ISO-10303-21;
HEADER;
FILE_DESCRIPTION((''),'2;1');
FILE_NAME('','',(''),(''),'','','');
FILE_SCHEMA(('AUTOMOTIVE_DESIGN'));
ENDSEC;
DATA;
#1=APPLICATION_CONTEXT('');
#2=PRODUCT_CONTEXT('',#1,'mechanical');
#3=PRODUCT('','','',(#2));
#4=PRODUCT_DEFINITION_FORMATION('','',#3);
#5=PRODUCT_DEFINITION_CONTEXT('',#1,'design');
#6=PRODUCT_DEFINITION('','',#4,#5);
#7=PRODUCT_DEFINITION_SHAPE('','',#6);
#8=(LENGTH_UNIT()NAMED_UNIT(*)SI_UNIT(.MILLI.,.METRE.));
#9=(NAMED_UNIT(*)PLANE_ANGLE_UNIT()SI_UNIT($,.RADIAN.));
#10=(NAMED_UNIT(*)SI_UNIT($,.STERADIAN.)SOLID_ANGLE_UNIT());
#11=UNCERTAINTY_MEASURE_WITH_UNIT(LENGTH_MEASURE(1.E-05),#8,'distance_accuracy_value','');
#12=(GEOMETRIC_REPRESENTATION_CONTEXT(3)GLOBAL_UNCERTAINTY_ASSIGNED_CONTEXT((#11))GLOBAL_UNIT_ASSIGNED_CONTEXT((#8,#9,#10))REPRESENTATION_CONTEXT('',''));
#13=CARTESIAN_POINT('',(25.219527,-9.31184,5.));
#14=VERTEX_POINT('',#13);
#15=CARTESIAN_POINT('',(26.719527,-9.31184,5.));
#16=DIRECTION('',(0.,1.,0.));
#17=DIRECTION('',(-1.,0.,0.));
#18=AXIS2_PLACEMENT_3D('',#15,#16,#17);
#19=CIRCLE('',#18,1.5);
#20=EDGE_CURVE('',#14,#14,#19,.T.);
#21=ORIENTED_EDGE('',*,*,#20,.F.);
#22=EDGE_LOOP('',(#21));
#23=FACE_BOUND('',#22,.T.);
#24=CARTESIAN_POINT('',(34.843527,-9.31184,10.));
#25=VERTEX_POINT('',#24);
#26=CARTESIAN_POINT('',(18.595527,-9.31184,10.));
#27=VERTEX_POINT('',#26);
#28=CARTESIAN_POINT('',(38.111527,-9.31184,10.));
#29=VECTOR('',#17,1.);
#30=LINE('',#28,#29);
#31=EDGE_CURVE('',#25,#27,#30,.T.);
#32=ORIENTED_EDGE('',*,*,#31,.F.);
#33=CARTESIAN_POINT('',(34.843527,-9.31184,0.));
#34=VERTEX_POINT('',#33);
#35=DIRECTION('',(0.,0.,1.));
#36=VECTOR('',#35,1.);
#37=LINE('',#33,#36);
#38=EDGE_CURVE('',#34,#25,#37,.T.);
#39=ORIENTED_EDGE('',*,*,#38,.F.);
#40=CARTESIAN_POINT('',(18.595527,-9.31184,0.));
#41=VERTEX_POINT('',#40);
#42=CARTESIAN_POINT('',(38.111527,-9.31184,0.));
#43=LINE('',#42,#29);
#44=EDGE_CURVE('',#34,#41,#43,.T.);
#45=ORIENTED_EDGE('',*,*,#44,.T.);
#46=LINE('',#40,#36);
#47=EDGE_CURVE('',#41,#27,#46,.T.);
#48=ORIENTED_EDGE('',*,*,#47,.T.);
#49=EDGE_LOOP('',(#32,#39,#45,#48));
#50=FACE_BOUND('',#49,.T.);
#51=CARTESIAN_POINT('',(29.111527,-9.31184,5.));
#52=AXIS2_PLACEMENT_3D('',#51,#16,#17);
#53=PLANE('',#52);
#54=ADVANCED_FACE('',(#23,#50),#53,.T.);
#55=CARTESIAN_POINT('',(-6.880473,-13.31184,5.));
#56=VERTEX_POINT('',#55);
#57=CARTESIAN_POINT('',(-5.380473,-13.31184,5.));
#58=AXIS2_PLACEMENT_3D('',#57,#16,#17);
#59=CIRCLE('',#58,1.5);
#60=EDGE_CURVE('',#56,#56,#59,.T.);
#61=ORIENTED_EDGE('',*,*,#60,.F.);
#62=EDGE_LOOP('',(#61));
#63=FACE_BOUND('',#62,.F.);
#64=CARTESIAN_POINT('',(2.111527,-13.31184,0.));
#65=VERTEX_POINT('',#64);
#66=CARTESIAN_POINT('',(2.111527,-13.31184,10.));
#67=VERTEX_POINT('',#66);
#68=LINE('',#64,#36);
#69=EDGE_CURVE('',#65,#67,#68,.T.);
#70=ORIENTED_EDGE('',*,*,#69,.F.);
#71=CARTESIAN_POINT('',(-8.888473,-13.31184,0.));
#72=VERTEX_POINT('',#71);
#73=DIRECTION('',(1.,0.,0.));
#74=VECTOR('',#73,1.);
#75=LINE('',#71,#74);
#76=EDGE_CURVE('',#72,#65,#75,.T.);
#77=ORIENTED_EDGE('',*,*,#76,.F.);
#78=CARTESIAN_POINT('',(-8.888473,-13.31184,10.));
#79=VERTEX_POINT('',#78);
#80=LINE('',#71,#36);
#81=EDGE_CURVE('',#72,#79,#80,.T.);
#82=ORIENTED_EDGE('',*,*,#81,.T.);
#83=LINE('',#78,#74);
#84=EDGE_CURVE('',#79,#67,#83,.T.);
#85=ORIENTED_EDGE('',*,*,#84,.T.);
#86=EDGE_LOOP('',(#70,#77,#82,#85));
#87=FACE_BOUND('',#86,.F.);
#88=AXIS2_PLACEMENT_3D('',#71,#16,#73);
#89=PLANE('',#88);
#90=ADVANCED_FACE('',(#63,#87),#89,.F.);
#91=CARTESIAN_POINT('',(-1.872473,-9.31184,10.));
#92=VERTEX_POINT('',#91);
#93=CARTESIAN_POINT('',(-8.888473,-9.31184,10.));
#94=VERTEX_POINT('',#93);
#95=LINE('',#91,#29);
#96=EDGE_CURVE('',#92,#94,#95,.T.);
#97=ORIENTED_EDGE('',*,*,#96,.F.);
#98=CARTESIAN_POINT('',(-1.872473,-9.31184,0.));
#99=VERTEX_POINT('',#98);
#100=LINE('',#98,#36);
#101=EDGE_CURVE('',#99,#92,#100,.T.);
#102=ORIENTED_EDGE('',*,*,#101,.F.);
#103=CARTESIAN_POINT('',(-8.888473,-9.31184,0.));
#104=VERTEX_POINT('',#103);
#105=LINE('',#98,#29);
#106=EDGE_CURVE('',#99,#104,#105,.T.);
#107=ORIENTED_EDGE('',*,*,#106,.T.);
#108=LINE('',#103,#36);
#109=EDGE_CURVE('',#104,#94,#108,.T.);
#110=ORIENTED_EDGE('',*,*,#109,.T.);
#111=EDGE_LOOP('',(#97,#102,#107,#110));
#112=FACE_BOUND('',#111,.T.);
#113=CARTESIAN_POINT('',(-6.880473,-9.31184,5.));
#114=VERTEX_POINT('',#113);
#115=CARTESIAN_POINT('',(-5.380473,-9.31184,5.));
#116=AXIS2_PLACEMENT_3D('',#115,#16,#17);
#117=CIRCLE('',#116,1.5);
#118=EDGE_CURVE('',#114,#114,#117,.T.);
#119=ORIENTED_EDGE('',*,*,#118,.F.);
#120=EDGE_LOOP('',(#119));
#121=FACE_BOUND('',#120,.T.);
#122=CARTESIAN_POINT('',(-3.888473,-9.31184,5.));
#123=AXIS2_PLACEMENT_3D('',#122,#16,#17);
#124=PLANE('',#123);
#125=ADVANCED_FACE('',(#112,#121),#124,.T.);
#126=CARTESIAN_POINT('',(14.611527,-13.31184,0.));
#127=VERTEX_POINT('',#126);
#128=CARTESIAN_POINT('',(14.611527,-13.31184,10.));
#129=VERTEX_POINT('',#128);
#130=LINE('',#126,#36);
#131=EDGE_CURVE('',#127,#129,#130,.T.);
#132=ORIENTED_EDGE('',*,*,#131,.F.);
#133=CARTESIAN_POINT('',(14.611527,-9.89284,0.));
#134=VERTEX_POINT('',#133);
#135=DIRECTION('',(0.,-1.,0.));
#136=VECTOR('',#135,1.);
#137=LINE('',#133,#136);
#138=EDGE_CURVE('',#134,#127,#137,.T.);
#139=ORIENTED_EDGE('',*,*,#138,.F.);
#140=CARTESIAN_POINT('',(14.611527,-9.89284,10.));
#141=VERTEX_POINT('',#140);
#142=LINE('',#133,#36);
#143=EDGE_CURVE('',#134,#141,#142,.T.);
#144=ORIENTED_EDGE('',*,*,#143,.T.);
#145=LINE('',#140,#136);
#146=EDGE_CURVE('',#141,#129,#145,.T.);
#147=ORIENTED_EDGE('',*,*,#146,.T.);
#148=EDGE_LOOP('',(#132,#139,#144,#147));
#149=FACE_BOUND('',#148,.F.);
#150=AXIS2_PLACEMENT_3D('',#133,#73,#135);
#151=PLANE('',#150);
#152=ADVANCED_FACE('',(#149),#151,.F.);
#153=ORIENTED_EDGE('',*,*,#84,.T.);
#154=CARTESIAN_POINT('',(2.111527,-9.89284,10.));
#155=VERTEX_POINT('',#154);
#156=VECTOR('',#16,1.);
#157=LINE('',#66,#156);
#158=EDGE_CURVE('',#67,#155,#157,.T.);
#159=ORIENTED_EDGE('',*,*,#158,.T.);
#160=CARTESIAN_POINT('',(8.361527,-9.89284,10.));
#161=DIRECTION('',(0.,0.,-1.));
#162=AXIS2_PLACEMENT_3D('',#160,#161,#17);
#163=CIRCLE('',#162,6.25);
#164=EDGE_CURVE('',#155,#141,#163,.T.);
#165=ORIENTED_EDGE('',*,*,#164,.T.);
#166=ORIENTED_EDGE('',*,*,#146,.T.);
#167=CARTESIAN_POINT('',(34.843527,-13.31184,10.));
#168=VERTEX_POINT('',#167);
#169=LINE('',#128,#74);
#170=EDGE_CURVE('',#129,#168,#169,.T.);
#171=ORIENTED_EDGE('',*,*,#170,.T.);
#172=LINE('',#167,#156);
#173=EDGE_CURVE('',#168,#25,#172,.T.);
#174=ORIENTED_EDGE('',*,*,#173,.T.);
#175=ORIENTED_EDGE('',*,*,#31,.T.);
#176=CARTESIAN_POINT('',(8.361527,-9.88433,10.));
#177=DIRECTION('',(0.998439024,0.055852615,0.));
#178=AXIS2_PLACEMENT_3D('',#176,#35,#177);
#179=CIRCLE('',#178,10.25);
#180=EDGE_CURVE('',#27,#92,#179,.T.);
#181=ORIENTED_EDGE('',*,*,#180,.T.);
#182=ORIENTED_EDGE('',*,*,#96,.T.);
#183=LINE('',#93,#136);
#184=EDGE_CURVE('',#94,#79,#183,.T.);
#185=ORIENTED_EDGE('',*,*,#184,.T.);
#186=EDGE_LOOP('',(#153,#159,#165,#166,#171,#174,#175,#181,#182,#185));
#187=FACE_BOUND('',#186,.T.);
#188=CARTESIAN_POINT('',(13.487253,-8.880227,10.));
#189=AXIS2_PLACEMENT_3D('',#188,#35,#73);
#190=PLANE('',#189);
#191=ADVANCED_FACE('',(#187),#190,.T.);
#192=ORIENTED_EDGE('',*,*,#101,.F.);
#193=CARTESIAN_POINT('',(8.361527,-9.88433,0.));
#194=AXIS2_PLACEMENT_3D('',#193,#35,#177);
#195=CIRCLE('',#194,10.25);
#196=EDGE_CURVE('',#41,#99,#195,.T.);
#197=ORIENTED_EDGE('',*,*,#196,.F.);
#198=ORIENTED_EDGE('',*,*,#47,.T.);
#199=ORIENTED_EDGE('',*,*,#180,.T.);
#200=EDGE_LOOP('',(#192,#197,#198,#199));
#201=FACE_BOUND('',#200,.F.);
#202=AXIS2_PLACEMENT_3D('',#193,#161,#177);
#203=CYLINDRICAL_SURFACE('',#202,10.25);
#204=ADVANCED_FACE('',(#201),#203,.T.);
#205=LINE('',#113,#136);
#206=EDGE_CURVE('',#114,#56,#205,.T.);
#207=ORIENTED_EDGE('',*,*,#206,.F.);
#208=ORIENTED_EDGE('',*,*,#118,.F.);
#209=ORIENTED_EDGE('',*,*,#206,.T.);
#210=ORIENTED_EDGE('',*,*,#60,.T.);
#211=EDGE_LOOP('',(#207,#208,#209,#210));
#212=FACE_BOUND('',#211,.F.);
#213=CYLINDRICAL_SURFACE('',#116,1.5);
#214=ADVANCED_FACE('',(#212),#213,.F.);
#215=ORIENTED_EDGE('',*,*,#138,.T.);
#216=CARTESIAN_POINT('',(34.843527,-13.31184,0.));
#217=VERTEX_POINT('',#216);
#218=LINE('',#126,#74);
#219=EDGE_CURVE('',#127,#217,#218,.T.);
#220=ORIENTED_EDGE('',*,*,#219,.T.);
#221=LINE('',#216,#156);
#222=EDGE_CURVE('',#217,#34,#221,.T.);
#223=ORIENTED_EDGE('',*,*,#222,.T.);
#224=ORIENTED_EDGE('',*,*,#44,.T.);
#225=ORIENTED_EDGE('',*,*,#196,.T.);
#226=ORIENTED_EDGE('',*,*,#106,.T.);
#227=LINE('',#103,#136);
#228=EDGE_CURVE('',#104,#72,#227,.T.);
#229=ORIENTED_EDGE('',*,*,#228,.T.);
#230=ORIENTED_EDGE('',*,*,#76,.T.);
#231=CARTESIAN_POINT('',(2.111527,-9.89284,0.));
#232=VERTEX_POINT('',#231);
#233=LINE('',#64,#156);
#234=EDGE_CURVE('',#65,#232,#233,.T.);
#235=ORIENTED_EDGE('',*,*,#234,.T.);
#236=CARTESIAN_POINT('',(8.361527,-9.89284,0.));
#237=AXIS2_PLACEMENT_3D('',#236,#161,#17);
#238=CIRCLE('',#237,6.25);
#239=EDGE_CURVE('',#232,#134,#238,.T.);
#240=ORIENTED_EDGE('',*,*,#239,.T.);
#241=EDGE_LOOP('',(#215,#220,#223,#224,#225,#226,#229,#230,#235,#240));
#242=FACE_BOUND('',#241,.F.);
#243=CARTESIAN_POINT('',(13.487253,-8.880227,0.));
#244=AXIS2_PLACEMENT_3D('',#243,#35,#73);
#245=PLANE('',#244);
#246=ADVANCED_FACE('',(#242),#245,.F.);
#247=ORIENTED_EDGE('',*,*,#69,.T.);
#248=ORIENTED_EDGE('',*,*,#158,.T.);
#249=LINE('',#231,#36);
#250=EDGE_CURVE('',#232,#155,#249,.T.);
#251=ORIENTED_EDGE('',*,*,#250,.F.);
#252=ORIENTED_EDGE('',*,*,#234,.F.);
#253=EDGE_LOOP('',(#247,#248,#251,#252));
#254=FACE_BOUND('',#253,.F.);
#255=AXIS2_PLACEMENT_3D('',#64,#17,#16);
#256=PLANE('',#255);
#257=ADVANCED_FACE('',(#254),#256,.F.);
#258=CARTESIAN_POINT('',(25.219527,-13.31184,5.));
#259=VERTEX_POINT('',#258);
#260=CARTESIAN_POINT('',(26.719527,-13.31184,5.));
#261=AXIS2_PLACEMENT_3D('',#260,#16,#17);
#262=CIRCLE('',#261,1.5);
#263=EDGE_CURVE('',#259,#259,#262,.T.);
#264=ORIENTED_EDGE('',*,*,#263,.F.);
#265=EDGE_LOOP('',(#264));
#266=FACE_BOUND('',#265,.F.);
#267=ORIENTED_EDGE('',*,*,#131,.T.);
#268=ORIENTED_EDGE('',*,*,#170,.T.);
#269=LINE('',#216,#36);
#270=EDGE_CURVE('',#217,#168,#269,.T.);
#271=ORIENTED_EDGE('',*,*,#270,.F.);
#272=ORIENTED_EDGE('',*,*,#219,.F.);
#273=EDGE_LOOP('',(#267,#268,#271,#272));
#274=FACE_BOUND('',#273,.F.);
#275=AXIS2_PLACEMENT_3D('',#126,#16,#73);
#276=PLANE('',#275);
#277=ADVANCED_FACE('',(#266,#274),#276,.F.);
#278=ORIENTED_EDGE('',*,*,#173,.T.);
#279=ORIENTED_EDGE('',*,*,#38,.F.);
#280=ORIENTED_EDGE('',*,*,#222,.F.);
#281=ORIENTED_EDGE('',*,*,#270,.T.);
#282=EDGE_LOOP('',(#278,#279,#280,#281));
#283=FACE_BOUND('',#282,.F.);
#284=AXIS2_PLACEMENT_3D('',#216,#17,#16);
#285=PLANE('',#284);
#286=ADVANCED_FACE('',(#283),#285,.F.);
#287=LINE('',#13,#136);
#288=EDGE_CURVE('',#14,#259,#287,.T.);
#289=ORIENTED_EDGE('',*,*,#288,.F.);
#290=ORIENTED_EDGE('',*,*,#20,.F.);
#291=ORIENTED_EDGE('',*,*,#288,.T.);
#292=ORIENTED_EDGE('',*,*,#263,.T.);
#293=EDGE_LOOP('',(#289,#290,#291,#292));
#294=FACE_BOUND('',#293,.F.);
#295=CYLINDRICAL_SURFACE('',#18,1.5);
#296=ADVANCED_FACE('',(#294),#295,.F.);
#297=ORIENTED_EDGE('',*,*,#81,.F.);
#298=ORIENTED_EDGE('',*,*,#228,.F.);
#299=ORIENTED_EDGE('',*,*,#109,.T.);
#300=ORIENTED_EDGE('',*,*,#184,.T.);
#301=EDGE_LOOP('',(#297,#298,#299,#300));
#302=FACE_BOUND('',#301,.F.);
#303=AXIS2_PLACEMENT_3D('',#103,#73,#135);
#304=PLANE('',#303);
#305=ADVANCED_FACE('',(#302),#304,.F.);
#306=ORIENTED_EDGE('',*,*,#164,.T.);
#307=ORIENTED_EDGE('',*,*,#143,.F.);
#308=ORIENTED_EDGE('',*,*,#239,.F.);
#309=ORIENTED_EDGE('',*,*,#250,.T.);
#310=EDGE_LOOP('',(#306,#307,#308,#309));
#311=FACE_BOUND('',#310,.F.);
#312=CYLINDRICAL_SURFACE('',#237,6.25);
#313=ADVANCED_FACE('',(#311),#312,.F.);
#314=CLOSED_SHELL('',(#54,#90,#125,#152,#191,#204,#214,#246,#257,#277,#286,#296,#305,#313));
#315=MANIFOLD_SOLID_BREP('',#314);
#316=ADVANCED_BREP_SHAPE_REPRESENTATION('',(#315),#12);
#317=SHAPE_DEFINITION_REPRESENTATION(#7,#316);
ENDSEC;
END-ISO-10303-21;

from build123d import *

# Parameters (mm, degrees)
F1_DEPTH  = 10
F3_DEPTH  = 13.6785106988
F4_DEPTH  = 3.268
F6_DEPTH  = 4
F8_DEPTH  = 4
F9_R      = 1.5
F10_DEPTH = 4.001


# Not quite as in the source:
# - a feature names something its author has since deleted; it is built from what else it names


with BuildPart() as f1:
    # F0 (on Top) → F1 (new body)
    with BuildSketch(Plane.XY):
        with BuildLine():
            Line((14.6115271971, -9.8928403326), (14.6115271971, -13.3118403326))
            Line((14.6115271971, -13.3118403326), (38.1115271971, -13.3118403326))
            Line((38.1115271971, -13.3118403326), (38.1115271971, -9.3118403326))
            Line((38.1115271971, -9.3118403326), (18.5955271971, -9.3118403326))
            ThreePointArc((18.5955271971, -9.3118403326), (8.3615271971, 0.3656703662), (-1.8724728029, -9.3118403326))
            Line((-1.8724728029, -9.3118403326), (-8.8884728029, -9.3118403326))
            Line((-8.8884728029, -9.3118403326), (-8.8884728029, -13.3118403326))
            Line((-8.8884728029, -13.3118403326), (2.1115271971, -13.3118403326))
            Line((2.1115271971, -13.3118403326), (2.1115271971, -9.8928403326))
            ThreePointArc((2.1115271971, -9.8928403326), (8.3615271971, -3.6428403326), (14.6115271971, -9.8928403326))
        make_face()
    extrude(amount=F1_DEPTH)

    # F2 (on face) → F3 (cut, through all)
    with BuildSketch(Plane.XZ.offset(13.3118403326)):
        Polygon((-2.1564728029, 5), (-3.0224728029, 6.4999559994), (-4.7544728029, 6.4999559994), (-5.6204728029, 5), (-4.7544728029, 3.5000440006), (-3.0224728029, 3.5000440006), align=None)
        Polygon((29.9775271971, 6.4999559994), (28.2455271971, 6.4999559994), (27.3795271971, 5), (28.2455271971, 3.5000440006), (29.9775271971, 3.5000440006), (30.8435271971, 5), align=None)
    extrude(amount=-F3_DEPTH, mode=Mode.SUBTRACT)

    # F4 (cut): a face of the model
    f4_faces = [f1.faces().sort_by_distance(p)[0] for p in [
        (38.1115271971, -11.3118403326, 5),
    ]]
    extrude(f4_faces, amount=-F4_DEPTH, mode=Mode.SUBTRACT)

    # F5 (on face) → F6 (join, through all)
    with BuildSketch(Plane(origin=(0, -9.3118403326, 0), x_dir=(-1, 0, 0), z_dir=(0, 1, 0))):
        Polygon((4.7544728029, 3.5000440006), (5.6204728029, 5), (4.7544728029, 6.4999559994), (3.0224728029, 6.4999559994), (2.1564728029, 5), (3.0224728029, 3.5000440006), align=None)
    extrude(amount=-F6_DEPTH)

    # F7 (on face) → F8 (join, through all)
    with BuildSketch(Plane(origin=(0, -9.3118403326, 0), x_dir=(-1, 0, 0), z_dir=(0, 1, 0))):
        Polygon((-28.2455271971, 3.5000440006), (-27.3795271971, 5), (-28.2455271971, 6.4999559994), (-29.9775271971, 6.4999559994), (-30.8435271971, 5), (-29.9775271971, 3.5000440006), align=None)
    extrude(amount=-F8_DEPTH)

    # F9 (on face) → F10 (cut, through all)
    with BuildSketch(Plane(origin=(0, -9.3118403326, 0), x_dir=(-1, 0, 0), z_dir=(0, 1, 0))):
        with Locations((5.3804728029, 5)):
            Circle(F9_R)
        with Locations((-26.7195271971, 5)):
            Circle(F9_R)
    extrude(amount=-F10_DEPTH, mode=Mode.SUBTRACT)


solid = f1.part
